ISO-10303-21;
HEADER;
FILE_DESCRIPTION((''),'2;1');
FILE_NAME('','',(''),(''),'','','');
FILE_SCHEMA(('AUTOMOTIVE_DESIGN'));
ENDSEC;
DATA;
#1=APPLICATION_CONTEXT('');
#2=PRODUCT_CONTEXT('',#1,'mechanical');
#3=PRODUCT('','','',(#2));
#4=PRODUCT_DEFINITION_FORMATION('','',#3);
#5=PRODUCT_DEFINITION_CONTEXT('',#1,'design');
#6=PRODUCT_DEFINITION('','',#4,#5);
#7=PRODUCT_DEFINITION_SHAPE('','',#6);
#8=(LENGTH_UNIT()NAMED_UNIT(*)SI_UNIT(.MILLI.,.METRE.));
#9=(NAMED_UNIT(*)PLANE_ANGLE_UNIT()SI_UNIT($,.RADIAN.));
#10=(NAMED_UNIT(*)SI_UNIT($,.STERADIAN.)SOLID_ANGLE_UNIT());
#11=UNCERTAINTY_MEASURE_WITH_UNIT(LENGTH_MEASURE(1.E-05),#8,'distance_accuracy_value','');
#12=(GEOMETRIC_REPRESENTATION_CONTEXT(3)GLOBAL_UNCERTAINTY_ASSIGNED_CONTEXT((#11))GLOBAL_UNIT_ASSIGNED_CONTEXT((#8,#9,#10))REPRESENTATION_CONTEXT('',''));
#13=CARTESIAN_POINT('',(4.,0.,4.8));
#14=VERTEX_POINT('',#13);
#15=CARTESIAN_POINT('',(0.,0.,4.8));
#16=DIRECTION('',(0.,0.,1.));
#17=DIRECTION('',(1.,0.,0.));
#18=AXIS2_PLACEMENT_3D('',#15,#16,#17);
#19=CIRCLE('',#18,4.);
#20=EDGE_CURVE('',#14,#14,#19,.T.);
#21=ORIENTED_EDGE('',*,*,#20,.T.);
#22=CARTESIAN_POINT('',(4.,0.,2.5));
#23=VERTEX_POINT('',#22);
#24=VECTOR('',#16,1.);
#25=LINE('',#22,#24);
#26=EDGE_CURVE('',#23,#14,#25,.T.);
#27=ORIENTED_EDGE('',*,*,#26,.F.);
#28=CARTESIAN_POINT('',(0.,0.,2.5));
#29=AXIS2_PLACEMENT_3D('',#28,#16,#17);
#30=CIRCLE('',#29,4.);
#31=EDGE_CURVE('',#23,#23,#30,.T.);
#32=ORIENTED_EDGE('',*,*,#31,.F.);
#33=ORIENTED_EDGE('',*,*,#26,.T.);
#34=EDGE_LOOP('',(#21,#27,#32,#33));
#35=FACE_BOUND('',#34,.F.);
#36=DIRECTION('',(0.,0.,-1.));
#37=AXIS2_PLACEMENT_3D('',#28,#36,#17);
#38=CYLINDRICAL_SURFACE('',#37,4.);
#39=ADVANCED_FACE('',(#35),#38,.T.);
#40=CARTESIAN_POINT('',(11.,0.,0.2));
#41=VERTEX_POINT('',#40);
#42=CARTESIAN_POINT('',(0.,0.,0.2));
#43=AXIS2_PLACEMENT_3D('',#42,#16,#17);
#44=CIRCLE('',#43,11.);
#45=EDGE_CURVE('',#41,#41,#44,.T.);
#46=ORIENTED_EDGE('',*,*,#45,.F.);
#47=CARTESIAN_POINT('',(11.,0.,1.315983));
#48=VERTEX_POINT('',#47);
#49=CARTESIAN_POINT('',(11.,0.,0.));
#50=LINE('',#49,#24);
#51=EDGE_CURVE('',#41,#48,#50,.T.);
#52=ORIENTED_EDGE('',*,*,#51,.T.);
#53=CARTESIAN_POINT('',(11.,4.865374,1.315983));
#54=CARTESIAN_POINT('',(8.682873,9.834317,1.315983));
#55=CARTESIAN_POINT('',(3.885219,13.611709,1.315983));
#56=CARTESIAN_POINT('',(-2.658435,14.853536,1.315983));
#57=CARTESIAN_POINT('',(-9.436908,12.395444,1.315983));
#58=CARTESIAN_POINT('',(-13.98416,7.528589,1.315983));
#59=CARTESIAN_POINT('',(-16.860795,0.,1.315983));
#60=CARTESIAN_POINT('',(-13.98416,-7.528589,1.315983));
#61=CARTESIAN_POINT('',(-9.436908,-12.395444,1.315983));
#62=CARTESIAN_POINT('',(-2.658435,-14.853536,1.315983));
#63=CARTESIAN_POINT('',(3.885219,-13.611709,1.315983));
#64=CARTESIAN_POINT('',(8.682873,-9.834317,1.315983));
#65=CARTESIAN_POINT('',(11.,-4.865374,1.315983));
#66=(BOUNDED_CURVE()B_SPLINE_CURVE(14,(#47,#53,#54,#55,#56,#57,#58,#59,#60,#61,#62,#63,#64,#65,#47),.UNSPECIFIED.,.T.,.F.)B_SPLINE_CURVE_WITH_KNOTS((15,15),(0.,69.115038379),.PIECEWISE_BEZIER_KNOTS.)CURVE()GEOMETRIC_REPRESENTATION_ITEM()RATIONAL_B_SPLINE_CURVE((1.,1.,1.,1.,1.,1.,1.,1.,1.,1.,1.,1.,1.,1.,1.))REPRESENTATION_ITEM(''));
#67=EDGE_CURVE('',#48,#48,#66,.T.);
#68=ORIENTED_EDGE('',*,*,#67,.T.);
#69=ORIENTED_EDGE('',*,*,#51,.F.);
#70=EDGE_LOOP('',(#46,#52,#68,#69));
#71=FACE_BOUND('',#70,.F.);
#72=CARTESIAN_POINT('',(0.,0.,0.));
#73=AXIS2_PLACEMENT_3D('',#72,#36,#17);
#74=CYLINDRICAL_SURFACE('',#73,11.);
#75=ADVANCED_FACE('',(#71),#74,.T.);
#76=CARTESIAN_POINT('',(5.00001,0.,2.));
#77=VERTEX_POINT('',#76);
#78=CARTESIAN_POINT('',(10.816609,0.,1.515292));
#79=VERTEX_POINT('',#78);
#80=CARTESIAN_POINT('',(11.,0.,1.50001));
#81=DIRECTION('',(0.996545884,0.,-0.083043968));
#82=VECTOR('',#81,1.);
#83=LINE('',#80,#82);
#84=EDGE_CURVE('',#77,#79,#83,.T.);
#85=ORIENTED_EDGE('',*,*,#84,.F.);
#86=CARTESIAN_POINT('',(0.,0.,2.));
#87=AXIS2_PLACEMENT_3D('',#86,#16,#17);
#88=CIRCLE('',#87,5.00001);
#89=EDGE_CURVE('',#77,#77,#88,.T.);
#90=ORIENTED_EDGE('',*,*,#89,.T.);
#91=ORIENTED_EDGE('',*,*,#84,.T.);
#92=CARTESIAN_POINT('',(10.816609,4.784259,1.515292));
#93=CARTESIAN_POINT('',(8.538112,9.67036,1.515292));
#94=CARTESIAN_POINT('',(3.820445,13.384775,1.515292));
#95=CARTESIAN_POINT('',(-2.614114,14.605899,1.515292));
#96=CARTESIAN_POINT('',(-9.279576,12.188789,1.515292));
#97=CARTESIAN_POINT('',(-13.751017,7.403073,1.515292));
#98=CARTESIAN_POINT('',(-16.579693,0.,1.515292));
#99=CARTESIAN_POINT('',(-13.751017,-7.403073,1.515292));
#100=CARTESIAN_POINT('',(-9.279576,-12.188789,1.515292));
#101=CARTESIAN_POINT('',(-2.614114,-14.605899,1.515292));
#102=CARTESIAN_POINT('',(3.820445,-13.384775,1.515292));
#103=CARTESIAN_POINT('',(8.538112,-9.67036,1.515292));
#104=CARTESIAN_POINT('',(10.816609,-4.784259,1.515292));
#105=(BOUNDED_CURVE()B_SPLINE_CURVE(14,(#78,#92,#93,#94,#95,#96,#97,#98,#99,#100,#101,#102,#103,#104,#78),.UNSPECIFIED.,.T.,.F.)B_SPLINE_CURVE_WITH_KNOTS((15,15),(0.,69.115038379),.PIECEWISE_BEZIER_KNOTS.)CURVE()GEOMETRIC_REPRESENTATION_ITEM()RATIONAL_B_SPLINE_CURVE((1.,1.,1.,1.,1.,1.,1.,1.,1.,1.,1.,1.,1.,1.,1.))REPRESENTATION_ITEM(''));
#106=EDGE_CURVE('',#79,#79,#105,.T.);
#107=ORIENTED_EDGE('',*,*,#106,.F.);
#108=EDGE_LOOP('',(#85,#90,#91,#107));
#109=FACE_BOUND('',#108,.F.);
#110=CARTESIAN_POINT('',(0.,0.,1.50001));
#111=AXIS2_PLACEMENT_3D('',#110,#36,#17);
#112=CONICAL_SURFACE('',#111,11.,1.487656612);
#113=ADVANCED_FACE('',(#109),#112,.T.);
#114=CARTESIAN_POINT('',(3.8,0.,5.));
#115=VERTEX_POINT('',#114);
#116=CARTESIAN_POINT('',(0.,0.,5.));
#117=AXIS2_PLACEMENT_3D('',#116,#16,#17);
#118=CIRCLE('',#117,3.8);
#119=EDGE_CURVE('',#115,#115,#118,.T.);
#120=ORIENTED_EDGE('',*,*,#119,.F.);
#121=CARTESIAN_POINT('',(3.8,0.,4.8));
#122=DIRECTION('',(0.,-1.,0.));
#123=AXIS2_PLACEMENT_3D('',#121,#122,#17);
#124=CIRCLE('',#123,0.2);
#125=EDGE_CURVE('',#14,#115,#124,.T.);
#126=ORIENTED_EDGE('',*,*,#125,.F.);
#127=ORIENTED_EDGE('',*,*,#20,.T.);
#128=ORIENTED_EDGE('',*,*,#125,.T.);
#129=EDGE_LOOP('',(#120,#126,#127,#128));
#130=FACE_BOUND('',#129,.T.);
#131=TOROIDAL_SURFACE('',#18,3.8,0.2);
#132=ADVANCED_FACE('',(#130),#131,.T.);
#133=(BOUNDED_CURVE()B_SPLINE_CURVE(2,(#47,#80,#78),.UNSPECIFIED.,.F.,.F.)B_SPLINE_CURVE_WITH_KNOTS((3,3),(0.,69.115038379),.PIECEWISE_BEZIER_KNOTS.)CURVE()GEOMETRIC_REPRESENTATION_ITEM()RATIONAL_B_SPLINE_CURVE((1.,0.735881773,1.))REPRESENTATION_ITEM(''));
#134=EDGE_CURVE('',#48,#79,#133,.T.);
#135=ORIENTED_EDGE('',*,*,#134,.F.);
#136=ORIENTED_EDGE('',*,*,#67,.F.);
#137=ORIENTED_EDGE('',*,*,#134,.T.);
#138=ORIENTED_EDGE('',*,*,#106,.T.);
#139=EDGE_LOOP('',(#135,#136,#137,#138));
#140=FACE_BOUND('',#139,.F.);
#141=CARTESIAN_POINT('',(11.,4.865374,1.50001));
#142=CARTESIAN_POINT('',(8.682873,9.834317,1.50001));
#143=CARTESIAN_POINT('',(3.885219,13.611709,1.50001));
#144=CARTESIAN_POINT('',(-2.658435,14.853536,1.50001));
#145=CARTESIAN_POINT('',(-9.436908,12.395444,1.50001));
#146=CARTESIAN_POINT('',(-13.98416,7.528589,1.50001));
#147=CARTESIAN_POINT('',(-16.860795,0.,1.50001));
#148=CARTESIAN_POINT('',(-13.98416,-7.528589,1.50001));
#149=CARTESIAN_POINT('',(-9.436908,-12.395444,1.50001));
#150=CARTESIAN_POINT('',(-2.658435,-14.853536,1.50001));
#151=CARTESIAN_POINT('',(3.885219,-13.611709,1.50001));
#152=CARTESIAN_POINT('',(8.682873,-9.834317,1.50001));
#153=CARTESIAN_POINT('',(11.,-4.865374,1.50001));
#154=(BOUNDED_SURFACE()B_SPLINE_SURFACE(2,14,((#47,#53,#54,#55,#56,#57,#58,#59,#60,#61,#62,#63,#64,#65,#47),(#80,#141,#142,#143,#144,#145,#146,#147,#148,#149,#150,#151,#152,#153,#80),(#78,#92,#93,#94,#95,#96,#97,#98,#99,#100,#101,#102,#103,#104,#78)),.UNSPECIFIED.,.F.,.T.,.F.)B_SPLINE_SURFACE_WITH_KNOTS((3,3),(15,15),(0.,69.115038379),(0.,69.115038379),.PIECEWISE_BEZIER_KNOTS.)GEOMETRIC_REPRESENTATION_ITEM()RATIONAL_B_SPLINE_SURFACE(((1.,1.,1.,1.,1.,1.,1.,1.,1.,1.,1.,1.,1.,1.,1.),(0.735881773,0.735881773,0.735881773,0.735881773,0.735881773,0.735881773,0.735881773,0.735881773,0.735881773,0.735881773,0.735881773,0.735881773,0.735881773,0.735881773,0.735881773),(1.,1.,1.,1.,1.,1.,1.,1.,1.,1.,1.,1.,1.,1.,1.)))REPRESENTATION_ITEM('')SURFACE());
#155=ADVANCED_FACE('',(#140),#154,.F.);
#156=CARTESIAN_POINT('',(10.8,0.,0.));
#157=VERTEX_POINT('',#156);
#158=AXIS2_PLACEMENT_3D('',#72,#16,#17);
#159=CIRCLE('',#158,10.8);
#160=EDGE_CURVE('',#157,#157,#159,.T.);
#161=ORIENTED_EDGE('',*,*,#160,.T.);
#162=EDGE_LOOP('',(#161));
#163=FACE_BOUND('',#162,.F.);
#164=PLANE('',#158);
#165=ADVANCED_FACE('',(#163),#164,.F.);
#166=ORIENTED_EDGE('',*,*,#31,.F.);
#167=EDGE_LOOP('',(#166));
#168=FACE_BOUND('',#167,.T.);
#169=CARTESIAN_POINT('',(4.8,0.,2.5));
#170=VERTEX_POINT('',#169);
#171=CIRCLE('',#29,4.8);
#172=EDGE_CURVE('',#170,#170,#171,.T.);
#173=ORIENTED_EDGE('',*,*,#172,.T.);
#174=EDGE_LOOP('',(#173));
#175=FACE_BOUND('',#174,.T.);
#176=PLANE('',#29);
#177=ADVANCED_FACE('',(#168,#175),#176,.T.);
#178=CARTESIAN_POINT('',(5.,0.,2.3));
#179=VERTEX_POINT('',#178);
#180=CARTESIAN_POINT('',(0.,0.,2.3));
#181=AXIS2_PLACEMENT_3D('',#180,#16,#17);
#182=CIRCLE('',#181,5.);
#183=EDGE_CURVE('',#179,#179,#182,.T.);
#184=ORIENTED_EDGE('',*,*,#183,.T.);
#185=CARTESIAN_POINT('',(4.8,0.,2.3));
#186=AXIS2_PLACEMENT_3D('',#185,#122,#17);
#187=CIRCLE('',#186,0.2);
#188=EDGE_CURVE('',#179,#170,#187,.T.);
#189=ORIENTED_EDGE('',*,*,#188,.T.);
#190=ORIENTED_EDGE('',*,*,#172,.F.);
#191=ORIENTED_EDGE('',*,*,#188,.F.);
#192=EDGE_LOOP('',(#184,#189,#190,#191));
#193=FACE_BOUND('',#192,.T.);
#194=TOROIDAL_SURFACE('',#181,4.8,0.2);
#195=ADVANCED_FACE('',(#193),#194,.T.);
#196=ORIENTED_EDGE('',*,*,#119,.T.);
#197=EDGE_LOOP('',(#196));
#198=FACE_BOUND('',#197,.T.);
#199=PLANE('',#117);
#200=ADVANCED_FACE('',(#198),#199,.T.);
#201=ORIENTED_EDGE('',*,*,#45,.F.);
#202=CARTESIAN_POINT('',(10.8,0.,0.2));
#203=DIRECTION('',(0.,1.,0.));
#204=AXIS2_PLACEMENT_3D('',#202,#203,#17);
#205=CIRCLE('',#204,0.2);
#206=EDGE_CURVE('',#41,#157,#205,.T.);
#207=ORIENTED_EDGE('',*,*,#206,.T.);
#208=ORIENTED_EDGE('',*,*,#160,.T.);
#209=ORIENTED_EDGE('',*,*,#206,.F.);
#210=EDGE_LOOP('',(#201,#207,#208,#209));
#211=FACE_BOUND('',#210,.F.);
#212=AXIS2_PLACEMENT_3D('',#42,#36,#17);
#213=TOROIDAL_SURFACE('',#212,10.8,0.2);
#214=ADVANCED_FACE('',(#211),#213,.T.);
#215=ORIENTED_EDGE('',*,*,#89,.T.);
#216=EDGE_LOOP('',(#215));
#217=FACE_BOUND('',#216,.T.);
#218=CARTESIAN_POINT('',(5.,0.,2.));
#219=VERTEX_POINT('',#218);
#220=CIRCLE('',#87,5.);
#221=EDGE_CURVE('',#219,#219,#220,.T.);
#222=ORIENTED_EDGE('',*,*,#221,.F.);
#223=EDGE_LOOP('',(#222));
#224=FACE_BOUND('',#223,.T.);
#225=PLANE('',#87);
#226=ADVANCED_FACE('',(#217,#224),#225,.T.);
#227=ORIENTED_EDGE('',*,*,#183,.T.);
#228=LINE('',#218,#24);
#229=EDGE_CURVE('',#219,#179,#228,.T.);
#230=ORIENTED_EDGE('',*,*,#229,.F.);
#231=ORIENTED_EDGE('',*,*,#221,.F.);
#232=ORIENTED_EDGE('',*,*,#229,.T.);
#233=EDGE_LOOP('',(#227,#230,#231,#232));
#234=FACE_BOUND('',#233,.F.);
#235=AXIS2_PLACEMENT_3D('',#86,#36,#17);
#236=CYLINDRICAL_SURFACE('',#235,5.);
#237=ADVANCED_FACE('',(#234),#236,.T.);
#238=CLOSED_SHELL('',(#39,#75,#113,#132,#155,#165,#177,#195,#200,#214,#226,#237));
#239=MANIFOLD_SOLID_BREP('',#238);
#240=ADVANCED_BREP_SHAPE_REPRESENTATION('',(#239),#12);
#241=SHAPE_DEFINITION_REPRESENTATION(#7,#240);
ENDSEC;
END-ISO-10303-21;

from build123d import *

# Parameters (mm, degrees)
F0_R     = 11
F1_DEPTH = 2
F2_R     = 5
F3_DEPTH = 0.5
F4_R     = 4
F5_DEPTH = 2.5
F6_SIZE2 = 0.49999
F6_SIZE  = 5.99999
F7_R     = 0.2


# Not quite as in the source:
# - a fillet or chamfer is up to 0.001 mm smaller than in the source, because OpenCascade refuses the exact size


with BuildPart() as f1:
    # F0 (on Top) → F1 (new body)
    with BuildSketch(Plane.XY):
        Circle(F0_R)
    extrude(amount=F1_DEPTH)

    # F2 (on face) → F3 (join)
    with BuildSketch(Plane.XY.offset(2)):
        Circle(F2_R)
    extrude(amount=F3_DEPTH)

    # F4 (on face) → F5 (join)
    with BuildSketch(Plane.XY.offset(2.5)):
        Circle(F4_R)
    extrude(amount=F5_DEPTH)

    # F6 (size 6 and 0.5 in the source; OpenCascade refuses exactly that, so slightly less here)
    f6_edges = [f1.edges().sort_by_distance(p)[0] for p in [
        (-11, 0, 2),
    ]]
    f6_side = f1.faces().sort_by_distance((-10.688873, 0, 2))[0]
    chamfer(f6_edges, length=F6_SIZE, length2=F6_SIZE2, reference=f6_side)

    # F7
    f7_edges = [f1.edges().sort_by_distance(p)[0] for p in [
        (-4, 0, 5),
        (-5, 0, 2.5),
        (-11, 0, 0),
        (-11, 0, 1.50001),
    ]]
    fillet(f7_edges, radius=F7_R)


solid = f1.part
